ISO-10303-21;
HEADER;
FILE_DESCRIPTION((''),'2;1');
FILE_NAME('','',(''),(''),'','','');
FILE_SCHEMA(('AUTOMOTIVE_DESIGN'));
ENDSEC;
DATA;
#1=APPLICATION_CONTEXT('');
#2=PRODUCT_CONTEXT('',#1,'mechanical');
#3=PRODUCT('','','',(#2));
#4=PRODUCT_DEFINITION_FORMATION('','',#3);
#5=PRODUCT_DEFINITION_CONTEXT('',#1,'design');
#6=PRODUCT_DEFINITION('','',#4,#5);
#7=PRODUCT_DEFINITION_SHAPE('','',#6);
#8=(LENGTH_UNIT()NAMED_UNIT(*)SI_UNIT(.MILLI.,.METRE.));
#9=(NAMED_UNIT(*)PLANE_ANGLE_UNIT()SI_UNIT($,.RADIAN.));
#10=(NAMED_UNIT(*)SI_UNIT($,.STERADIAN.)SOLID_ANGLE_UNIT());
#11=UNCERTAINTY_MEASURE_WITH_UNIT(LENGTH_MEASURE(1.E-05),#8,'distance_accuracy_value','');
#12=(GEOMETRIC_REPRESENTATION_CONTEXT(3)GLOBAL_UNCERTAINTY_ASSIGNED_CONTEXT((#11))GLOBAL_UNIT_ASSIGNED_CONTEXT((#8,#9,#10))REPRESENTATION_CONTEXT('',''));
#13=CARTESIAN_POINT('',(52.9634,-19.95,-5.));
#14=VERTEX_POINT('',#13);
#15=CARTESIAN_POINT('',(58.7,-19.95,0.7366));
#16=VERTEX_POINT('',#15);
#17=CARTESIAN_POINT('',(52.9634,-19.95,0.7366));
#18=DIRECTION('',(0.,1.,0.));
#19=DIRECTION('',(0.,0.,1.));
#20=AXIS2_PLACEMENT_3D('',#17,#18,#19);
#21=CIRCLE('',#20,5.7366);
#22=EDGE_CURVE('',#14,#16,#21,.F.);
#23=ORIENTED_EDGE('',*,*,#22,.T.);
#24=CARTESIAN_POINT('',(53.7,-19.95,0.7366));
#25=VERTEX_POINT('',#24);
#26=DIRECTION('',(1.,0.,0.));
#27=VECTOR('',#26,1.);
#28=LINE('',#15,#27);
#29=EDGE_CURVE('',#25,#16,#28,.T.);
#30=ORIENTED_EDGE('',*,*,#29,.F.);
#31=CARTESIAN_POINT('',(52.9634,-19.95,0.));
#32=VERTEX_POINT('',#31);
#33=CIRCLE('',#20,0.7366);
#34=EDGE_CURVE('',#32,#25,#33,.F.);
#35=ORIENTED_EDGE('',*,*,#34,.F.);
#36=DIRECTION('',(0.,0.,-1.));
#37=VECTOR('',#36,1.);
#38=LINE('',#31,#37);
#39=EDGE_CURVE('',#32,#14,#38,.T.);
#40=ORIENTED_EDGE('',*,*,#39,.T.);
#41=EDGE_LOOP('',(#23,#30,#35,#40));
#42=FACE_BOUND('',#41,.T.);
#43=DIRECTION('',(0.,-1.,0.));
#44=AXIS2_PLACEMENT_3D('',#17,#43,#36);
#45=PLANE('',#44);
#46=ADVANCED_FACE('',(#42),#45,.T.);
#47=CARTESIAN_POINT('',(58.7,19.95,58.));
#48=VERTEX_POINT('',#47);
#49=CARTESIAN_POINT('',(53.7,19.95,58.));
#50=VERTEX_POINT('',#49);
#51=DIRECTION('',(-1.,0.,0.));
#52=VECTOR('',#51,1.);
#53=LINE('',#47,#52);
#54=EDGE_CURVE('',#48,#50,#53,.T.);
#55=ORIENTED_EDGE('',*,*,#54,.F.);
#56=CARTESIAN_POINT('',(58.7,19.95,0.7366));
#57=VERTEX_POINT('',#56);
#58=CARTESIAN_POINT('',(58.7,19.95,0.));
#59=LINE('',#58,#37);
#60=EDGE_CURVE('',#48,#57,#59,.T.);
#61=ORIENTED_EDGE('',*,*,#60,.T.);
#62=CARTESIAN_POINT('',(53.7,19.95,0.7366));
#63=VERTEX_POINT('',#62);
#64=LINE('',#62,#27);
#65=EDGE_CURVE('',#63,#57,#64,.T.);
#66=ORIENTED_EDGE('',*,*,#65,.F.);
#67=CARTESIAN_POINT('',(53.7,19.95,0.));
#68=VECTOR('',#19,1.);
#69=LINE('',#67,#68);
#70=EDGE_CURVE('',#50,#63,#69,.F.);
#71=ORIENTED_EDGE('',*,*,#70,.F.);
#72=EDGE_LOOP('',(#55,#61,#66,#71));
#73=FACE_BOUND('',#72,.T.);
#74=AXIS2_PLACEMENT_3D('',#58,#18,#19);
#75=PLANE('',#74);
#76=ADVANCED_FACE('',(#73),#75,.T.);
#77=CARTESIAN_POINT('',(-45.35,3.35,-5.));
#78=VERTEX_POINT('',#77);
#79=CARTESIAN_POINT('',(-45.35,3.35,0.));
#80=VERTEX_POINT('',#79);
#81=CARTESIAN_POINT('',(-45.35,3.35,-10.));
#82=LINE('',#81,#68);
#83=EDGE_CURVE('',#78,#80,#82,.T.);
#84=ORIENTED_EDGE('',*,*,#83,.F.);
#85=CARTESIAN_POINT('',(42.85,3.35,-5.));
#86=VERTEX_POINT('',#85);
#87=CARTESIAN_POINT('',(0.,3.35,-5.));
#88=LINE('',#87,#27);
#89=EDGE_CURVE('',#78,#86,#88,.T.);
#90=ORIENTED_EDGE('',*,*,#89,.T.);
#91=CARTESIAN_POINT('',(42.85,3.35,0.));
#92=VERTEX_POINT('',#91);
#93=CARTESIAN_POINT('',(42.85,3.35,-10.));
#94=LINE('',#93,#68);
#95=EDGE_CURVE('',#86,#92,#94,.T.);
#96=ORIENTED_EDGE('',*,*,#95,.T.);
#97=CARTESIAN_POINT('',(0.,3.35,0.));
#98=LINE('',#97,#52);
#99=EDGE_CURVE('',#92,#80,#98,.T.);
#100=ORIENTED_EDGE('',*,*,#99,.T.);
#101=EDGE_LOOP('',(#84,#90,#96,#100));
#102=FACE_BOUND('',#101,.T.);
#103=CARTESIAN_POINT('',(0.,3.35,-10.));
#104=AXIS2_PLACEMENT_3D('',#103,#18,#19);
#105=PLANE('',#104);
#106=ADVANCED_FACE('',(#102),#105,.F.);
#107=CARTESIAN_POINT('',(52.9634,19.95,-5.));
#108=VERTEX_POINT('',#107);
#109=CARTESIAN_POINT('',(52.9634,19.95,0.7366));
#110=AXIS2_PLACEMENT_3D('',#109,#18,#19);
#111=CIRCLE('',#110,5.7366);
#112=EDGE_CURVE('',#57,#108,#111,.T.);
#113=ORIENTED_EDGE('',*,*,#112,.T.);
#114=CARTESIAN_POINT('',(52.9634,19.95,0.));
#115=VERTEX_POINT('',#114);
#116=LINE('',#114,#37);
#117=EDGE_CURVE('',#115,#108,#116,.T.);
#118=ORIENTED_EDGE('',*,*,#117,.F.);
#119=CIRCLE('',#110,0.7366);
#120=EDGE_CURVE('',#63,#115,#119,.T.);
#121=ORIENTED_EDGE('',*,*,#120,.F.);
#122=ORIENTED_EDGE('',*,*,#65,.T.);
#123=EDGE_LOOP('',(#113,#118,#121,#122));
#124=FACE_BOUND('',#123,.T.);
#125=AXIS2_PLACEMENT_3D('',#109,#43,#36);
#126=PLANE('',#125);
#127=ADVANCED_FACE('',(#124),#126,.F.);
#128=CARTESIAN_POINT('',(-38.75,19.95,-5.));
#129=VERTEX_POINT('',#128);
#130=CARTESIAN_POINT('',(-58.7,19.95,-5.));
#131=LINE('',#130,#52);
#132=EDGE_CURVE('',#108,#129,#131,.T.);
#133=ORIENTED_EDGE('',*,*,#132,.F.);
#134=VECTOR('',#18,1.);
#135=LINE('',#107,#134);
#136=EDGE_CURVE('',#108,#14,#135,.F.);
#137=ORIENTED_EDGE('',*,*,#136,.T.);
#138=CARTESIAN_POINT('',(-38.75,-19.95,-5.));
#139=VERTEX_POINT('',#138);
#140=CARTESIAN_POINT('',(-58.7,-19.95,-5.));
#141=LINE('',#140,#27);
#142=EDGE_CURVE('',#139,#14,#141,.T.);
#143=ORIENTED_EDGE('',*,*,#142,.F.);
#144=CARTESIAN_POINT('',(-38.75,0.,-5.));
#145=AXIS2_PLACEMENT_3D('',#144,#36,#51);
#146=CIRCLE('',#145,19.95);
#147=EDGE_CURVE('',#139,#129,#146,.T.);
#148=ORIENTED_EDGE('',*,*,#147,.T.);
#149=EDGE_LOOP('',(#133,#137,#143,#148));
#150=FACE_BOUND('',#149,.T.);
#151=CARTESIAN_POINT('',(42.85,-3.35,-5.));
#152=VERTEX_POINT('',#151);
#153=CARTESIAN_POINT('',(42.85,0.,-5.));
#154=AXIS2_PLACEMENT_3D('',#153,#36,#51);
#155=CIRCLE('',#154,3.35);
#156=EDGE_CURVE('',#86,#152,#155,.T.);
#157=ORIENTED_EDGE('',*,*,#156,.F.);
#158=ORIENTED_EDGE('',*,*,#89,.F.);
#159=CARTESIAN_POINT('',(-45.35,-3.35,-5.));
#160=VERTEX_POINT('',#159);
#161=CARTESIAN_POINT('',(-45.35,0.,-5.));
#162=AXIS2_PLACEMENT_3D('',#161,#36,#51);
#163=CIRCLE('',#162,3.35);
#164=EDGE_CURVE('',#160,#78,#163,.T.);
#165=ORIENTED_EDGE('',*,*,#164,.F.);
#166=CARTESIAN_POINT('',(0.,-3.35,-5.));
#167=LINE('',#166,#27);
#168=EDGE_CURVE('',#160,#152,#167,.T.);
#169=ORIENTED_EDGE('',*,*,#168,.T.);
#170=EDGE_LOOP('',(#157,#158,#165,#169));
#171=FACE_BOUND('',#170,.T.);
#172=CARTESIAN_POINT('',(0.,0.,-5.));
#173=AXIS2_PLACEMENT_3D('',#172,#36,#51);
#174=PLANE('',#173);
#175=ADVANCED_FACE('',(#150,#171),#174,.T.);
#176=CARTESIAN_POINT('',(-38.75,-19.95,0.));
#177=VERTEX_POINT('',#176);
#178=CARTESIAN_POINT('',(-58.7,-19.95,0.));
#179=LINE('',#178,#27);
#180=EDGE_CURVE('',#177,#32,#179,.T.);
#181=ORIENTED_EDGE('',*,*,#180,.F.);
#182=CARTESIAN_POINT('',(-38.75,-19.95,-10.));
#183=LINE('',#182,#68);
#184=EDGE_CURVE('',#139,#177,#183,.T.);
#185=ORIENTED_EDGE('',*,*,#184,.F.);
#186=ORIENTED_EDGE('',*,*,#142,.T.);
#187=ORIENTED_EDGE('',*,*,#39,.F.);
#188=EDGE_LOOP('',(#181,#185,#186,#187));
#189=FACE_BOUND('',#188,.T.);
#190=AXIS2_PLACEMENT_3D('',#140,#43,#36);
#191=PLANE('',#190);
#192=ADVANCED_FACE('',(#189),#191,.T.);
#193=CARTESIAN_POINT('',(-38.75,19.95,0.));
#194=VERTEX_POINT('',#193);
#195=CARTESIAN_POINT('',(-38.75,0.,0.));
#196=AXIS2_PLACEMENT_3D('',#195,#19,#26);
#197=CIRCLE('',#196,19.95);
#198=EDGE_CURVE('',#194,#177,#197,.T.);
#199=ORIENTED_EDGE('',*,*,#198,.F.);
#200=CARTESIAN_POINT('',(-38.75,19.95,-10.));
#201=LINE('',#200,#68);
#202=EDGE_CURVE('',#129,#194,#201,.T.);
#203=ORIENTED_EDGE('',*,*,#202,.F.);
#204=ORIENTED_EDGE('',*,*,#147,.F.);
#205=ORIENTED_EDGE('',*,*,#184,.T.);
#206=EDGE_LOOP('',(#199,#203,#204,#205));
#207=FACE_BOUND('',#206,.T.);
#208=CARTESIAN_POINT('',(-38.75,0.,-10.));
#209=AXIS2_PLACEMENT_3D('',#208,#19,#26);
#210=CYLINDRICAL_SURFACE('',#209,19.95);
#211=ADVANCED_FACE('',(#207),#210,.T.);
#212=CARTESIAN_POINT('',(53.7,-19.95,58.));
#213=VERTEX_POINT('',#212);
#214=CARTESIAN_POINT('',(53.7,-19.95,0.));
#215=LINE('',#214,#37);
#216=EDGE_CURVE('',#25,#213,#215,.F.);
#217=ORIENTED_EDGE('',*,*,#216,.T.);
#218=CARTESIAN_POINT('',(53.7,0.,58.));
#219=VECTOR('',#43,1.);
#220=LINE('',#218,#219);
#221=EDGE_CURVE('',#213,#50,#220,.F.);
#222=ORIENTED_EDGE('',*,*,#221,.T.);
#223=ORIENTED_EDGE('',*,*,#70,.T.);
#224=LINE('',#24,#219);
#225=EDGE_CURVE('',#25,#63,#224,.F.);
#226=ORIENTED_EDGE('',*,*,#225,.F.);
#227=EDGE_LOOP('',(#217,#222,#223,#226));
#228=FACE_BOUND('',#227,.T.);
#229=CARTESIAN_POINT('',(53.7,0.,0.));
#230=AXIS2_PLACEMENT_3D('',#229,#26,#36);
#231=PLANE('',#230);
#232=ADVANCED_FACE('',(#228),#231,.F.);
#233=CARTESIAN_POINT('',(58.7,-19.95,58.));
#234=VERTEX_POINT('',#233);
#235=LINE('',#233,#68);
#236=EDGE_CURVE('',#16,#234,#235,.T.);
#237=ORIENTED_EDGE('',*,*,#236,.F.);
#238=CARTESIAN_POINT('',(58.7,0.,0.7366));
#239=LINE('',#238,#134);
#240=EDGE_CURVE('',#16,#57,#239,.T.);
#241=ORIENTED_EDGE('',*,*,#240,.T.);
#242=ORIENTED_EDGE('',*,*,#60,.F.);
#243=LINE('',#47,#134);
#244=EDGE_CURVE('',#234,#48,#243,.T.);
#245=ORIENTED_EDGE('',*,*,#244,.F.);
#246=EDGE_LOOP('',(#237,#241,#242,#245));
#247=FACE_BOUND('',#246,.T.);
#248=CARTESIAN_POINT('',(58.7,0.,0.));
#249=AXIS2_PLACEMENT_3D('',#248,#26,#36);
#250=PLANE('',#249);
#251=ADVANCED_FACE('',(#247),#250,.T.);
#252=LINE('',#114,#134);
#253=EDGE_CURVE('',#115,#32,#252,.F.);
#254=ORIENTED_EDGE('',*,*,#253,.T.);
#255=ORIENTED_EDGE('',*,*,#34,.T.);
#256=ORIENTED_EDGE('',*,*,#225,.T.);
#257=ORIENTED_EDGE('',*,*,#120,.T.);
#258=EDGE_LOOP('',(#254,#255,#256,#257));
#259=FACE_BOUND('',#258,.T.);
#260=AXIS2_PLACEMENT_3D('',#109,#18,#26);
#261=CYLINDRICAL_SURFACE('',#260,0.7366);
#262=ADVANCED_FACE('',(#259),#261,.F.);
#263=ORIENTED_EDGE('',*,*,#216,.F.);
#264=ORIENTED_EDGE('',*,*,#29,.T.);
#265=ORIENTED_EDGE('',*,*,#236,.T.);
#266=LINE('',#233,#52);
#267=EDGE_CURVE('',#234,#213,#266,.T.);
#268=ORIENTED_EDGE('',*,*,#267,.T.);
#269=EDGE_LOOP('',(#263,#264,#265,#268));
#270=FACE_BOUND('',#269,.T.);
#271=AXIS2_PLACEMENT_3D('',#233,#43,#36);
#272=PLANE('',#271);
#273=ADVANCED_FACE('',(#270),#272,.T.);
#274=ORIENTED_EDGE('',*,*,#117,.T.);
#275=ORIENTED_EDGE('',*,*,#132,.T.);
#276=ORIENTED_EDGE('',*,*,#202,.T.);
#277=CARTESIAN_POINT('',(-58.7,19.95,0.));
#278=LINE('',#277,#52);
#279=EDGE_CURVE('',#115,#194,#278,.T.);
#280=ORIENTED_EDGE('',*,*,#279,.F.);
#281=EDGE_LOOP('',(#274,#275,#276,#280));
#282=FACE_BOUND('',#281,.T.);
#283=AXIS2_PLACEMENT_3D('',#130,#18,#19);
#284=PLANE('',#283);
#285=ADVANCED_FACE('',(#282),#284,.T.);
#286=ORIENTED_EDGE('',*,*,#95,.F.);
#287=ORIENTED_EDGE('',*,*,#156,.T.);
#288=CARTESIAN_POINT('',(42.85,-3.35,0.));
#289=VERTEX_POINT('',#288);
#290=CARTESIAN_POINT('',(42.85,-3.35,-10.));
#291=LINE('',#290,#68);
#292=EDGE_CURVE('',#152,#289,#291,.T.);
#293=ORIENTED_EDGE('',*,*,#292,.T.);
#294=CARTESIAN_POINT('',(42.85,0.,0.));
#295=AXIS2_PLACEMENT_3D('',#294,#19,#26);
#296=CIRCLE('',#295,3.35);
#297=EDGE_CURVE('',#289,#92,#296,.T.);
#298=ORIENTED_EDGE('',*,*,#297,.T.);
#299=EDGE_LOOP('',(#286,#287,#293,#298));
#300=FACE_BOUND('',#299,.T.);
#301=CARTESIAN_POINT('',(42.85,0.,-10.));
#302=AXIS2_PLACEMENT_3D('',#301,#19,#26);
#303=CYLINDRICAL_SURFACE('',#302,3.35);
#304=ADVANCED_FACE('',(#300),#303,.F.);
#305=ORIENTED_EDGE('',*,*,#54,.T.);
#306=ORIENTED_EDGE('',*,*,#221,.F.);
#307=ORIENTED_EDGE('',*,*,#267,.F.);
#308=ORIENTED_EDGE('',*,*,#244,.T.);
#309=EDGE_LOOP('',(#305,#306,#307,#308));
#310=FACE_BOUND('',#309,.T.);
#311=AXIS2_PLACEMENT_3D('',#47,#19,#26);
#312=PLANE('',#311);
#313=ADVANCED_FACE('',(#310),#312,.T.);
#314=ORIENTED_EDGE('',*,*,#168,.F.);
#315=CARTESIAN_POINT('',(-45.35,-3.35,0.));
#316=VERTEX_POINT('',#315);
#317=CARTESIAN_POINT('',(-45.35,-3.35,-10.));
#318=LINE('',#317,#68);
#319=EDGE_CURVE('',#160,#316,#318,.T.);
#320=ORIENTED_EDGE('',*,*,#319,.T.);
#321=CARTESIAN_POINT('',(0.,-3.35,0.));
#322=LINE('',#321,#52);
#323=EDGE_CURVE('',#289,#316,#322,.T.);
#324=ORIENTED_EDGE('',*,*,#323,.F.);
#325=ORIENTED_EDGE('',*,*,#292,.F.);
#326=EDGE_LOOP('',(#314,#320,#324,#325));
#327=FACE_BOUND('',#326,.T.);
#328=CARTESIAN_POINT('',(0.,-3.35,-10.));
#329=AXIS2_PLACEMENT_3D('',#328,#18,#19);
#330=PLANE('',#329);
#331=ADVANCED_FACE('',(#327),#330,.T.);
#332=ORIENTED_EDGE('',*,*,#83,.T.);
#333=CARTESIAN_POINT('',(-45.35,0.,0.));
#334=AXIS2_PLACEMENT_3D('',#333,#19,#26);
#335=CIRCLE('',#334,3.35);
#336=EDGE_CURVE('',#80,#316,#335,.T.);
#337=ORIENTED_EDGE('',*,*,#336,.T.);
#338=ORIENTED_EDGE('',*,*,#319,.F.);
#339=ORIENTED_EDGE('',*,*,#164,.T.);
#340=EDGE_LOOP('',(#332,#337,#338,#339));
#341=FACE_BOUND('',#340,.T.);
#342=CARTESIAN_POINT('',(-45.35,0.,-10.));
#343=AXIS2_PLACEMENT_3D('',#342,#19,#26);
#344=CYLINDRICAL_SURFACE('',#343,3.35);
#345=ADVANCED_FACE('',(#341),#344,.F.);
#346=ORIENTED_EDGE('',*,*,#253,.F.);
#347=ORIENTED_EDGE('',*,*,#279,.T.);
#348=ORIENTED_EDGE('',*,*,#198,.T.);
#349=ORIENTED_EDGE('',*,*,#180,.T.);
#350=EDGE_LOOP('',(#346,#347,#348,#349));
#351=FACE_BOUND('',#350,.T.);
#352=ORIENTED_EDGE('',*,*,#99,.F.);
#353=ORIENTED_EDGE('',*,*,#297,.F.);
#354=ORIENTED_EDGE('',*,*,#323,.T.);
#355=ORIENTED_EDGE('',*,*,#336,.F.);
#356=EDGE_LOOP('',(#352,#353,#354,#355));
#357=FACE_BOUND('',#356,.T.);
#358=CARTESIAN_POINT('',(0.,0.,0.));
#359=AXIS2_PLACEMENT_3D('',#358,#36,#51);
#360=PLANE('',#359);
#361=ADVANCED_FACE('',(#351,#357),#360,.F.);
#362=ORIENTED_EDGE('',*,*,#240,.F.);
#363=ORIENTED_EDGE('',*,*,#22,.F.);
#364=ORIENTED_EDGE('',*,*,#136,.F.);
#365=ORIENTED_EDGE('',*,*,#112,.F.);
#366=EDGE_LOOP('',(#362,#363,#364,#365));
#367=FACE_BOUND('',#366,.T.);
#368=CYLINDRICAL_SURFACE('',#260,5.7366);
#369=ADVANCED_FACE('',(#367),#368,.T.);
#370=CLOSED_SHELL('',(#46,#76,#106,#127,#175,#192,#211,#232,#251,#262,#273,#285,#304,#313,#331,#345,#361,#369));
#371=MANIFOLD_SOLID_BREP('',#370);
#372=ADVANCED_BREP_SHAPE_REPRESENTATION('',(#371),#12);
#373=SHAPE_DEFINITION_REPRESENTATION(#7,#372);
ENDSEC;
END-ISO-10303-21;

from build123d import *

# Parameters (mm, degrees)
SKETCH1_W                    = 117.4
SKETCH1_H                    = 39.9
BASE_FLANGE1_DEPTH           = 5
EDGE_FLANGE1_STRIP_W         = 21.4732
EDGE_FLANGE1_STRIP_H         = 5
EDGE_FLANGE1_STRIP_CUT_DEPTH = 39.9
EDGE_FLANGE1_DEPTH           = 39.9
CUT_EXTRUDE1_START           = -5
CUT_EXTRUDE1_DEPTH           = 5


with BuildPart() as part:
    # Base-Flange1: sheet metal written as solids
    # Sketch1 → Base-Flange1 (new body)
    with BuildSketch(Plane.XY):
        Rectangle(SKETCH1_W, SKETCH1_H)
    extrude(amount=-BASE_FLANGE1_DEPTH)

    # Edge-Flange1: sheet metal written as solids
    # Edge-Flange1 strip (on a plane across the edge) → Edge-Flange1 strip cut (cut)
    with BuildSketch(Plane(origin=(58.7, -19.95, 0), x_dir=(-1, 0, 0), z_dir=(0, 1, 0))):
        with Locations((-5, -2.5)):
            Rectangle(EDGE_FLANGE1_STRIP_W, EDGE_FLANGE1_STRIP_H)
    extrude(amount=EDGE_FLANGE1_STRIP_CUT_DEPTH, mode=Mode.SUBTRACT)

    # Edge-Flange1 section (on a plane across the edge) → Edge-Flange1 (add)
    with BuildSketch(Plane(origin=(58.7, -19.95, 0), x_dir=(-1, 0, 0), z_dir=(0, 1, 0))):
        with BuildLine():
            Line((0, 0.7366), (0, 58))
            Line((0, 58), (5, 58))
            Line((5, 58), (5, 0.7366))
            ThreePointArc((5, 0.7366), (5.215745145, 0.215745145), (5.7366, 0))
            Line((5.7366, 0), (5.7366, -5))
            ThreePointArc((5.7366, -5), (1.680211239, -3.319788761), (0, 0.7366))
        make_face()
    extrude(amount=EDGE_FLANGE1_DEPTH)

    # Cut-Extrude1: read off the stored shape, not the designer's step
    # Cut-Extrude1 outline → Cut-Extrude1 (cut)
    with BuildSketch(Plane.XY.offset(CUT_EXTRUDE1_START)):
        with BuildLine():
            ThreePointArc((-38.75, -19.95), (-52.856780317, -14.106780252), (-58.7, 9.1e-08))
            Line((-58.7, 9.1e-08), (-58.7, -19.95))
            Line((-58.7, -19.95), (-38.75, -19.95))
        make_face()
        with BuildLine():
            ThreePointArc((-58.7, 9.1e-08), (-52.856780252, 14.106780317), (-38.75, 19.95))
            Line((-38.75, 19.95), (-58.7, 19.95))
            Line((-58.7, 19.95), (-58.7, 9.1e-08))
        make_face()
        with BuildLine():
            ThreePointArc((42.85, -3.35), (46.2, 0), (42.85, 3.35))
            Line((42.85, 3.35), (-45.35, 3.35))
            ThreePointArc((-45.35, 3.35), (-48.7, 0), (-45.35, -3.35))
            Line((-45.35, -3.35), (42.85, -3.35))
        make_face()
    extrude(amount=CUT_EXTRUDE1_DEPTH, mode=Mode.SUBTRACT)


solid = part.part
